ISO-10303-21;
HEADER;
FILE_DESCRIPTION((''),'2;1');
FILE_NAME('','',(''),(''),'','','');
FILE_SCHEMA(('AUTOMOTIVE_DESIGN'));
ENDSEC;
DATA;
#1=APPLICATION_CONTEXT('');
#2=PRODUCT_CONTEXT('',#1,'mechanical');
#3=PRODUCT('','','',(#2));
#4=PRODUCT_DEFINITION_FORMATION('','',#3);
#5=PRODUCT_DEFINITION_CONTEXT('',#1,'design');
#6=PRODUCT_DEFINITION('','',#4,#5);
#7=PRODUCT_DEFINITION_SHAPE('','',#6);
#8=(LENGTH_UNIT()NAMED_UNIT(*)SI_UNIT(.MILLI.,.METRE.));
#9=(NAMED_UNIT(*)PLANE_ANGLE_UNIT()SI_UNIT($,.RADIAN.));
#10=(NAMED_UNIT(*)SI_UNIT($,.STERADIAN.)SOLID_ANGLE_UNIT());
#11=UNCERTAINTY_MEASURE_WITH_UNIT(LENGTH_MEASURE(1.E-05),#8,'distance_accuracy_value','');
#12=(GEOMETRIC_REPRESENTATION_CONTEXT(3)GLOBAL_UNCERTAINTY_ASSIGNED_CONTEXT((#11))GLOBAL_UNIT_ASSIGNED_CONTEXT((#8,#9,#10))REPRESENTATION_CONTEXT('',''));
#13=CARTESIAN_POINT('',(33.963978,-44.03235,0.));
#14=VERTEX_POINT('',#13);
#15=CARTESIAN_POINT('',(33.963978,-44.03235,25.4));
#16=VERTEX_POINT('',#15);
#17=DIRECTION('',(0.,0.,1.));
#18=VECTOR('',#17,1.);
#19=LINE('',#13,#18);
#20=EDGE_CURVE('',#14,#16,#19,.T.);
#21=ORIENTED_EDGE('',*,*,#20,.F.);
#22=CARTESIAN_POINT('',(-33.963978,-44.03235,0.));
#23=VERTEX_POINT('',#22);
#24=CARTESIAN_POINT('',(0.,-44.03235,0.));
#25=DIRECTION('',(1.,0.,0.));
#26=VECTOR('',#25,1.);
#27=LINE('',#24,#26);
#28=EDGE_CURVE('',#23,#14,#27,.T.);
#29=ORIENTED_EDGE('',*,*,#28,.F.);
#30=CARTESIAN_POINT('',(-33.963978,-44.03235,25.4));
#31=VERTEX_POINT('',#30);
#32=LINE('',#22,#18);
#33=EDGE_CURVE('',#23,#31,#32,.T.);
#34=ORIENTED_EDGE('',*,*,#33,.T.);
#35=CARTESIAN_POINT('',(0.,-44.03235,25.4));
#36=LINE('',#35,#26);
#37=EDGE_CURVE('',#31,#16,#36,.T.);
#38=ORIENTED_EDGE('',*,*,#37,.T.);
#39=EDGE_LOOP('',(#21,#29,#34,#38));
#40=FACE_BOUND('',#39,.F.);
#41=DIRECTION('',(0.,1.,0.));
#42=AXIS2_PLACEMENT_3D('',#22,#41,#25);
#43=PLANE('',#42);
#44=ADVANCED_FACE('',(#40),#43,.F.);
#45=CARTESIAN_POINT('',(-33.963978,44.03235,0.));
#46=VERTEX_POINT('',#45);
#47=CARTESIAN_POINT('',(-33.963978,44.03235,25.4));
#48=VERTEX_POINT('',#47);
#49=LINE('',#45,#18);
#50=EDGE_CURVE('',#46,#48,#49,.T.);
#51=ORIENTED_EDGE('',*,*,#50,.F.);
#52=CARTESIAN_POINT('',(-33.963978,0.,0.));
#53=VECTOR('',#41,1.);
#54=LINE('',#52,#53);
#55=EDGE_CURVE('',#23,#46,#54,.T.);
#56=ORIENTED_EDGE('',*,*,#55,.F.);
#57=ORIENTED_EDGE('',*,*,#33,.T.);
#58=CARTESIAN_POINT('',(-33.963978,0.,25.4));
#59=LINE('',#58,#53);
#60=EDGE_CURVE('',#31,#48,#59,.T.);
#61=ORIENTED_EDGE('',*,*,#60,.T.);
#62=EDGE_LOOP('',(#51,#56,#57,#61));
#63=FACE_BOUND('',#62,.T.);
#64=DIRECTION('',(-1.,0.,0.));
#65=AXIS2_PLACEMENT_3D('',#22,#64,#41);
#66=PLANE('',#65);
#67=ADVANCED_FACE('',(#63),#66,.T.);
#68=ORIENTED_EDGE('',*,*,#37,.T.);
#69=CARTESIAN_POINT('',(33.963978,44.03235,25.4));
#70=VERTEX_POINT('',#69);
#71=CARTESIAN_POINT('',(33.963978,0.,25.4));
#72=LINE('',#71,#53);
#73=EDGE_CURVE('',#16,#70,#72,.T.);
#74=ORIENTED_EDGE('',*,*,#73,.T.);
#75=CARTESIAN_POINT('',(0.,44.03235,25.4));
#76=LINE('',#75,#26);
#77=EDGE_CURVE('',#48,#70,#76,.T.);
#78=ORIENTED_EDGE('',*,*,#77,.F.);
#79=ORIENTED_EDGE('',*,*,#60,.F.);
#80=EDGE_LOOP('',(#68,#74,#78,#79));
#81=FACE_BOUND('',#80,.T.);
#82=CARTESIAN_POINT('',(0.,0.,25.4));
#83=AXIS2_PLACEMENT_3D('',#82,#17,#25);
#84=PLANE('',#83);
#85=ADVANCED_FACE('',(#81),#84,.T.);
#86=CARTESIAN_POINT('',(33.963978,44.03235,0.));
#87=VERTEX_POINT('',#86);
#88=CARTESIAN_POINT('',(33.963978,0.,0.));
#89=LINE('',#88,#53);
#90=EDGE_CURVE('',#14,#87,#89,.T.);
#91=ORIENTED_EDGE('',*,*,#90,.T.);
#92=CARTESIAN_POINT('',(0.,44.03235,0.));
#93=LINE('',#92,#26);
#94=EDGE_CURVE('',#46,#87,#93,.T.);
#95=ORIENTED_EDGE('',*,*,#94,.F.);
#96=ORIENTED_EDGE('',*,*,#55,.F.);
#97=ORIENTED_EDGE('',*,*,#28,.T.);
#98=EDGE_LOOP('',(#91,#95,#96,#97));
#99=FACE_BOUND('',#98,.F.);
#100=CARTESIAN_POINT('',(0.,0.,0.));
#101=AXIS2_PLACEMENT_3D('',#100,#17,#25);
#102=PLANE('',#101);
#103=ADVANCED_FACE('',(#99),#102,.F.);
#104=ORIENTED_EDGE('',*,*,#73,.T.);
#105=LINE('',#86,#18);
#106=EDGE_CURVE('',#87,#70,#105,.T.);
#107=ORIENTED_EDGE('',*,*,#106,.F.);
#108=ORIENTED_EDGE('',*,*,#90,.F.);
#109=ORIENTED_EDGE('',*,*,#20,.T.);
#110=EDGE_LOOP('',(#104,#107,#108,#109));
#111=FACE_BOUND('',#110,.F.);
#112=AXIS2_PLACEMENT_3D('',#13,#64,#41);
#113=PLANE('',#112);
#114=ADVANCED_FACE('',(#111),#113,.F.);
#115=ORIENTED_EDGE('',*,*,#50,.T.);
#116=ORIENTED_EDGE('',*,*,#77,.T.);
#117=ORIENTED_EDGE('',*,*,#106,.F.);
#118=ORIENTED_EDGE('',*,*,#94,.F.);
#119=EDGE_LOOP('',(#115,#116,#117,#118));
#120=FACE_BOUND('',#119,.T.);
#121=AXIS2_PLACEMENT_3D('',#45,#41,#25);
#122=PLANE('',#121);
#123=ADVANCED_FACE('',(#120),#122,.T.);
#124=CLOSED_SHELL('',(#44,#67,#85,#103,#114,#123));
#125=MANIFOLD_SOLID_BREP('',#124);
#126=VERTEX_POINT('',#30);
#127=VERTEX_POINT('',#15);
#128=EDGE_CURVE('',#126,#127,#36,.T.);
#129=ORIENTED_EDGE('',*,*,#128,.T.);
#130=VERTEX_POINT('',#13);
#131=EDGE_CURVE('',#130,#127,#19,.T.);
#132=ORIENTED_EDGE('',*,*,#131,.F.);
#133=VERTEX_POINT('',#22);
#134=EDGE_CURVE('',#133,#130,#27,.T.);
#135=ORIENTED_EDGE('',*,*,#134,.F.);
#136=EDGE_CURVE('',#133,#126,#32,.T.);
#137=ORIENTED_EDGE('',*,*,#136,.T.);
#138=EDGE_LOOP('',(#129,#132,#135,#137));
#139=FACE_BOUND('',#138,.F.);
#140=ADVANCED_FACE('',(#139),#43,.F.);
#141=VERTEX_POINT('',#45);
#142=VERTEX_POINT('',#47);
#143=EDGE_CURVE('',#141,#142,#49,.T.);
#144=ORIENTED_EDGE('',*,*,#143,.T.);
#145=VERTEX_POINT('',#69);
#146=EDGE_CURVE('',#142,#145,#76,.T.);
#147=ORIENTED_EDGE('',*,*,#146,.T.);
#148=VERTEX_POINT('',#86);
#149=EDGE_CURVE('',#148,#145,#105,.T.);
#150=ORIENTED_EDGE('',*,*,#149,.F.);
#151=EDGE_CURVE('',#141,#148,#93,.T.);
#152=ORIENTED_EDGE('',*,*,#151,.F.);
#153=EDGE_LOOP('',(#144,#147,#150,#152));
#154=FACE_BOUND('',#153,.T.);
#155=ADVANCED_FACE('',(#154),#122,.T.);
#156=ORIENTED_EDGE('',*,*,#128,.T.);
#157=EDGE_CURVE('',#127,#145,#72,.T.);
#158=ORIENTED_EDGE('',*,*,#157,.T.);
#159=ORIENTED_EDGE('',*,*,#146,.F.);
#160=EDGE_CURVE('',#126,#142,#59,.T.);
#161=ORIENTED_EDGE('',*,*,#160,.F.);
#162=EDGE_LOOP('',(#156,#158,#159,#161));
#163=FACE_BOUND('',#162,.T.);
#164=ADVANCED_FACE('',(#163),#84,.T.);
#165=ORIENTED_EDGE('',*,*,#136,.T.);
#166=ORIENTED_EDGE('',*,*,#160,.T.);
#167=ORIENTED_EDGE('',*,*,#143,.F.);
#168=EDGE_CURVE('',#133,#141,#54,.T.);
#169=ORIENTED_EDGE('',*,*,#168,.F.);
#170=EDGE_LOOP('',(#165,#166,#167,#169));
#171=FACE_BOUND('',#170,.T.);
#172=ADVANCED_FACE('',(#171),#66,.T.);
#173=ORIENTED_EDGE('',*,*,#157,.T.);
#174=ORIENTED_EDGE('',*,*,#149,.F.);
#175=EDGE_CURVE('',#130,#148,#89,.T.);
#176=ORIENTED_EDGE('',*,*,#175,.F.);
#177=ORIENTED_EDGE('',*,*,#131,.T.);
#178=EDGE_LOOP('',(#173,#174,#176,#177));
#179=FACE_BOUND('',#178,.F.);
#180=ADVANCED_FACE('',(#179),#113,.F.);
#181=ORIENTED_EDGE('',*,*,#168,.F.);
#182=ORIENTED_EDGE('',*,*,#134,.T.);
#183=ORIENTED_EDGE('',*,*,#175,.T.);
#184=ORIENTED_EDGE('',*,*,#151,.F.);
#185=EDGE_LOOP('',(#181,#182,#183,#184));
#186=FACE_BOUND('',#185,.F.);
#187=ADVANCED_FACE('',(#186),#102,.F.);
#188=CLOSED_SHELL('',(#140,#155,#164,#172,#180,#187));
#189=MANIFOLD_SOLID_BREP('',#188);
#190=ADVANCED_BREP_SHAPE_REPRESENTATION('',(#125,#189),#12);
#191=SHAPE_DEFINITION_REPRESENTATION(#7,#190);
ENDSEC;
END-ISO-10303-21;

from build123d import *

# Parameters (mm, degrees)
F0_W     = 67.9279565811
F0_H     = 88.0647003651
F1_DEPTH = 25.4
F2_DEPTH = 25.4


# Not quite as in the source:
# - a feature of the source that left no trace in its solid (it failed there, or was rolled back) is left out


with BuildPart() as f1:
    # F0 (on Top) → F1 (new body)
    with BuildSketch(Plane.XY):
        Rectangle(F0_W, F0_H)
    extrude(amount=F1_DEPTH)


with BuildPart() as f2:
    # F0 (on Top) → F2 (new body)
    with BuildSketch(Plane.XY):
        Rectangle(F0_W, F0_H)
    extrude(amount=F2_DEPTH)


solid = Compound([f1.part, f2.part])
